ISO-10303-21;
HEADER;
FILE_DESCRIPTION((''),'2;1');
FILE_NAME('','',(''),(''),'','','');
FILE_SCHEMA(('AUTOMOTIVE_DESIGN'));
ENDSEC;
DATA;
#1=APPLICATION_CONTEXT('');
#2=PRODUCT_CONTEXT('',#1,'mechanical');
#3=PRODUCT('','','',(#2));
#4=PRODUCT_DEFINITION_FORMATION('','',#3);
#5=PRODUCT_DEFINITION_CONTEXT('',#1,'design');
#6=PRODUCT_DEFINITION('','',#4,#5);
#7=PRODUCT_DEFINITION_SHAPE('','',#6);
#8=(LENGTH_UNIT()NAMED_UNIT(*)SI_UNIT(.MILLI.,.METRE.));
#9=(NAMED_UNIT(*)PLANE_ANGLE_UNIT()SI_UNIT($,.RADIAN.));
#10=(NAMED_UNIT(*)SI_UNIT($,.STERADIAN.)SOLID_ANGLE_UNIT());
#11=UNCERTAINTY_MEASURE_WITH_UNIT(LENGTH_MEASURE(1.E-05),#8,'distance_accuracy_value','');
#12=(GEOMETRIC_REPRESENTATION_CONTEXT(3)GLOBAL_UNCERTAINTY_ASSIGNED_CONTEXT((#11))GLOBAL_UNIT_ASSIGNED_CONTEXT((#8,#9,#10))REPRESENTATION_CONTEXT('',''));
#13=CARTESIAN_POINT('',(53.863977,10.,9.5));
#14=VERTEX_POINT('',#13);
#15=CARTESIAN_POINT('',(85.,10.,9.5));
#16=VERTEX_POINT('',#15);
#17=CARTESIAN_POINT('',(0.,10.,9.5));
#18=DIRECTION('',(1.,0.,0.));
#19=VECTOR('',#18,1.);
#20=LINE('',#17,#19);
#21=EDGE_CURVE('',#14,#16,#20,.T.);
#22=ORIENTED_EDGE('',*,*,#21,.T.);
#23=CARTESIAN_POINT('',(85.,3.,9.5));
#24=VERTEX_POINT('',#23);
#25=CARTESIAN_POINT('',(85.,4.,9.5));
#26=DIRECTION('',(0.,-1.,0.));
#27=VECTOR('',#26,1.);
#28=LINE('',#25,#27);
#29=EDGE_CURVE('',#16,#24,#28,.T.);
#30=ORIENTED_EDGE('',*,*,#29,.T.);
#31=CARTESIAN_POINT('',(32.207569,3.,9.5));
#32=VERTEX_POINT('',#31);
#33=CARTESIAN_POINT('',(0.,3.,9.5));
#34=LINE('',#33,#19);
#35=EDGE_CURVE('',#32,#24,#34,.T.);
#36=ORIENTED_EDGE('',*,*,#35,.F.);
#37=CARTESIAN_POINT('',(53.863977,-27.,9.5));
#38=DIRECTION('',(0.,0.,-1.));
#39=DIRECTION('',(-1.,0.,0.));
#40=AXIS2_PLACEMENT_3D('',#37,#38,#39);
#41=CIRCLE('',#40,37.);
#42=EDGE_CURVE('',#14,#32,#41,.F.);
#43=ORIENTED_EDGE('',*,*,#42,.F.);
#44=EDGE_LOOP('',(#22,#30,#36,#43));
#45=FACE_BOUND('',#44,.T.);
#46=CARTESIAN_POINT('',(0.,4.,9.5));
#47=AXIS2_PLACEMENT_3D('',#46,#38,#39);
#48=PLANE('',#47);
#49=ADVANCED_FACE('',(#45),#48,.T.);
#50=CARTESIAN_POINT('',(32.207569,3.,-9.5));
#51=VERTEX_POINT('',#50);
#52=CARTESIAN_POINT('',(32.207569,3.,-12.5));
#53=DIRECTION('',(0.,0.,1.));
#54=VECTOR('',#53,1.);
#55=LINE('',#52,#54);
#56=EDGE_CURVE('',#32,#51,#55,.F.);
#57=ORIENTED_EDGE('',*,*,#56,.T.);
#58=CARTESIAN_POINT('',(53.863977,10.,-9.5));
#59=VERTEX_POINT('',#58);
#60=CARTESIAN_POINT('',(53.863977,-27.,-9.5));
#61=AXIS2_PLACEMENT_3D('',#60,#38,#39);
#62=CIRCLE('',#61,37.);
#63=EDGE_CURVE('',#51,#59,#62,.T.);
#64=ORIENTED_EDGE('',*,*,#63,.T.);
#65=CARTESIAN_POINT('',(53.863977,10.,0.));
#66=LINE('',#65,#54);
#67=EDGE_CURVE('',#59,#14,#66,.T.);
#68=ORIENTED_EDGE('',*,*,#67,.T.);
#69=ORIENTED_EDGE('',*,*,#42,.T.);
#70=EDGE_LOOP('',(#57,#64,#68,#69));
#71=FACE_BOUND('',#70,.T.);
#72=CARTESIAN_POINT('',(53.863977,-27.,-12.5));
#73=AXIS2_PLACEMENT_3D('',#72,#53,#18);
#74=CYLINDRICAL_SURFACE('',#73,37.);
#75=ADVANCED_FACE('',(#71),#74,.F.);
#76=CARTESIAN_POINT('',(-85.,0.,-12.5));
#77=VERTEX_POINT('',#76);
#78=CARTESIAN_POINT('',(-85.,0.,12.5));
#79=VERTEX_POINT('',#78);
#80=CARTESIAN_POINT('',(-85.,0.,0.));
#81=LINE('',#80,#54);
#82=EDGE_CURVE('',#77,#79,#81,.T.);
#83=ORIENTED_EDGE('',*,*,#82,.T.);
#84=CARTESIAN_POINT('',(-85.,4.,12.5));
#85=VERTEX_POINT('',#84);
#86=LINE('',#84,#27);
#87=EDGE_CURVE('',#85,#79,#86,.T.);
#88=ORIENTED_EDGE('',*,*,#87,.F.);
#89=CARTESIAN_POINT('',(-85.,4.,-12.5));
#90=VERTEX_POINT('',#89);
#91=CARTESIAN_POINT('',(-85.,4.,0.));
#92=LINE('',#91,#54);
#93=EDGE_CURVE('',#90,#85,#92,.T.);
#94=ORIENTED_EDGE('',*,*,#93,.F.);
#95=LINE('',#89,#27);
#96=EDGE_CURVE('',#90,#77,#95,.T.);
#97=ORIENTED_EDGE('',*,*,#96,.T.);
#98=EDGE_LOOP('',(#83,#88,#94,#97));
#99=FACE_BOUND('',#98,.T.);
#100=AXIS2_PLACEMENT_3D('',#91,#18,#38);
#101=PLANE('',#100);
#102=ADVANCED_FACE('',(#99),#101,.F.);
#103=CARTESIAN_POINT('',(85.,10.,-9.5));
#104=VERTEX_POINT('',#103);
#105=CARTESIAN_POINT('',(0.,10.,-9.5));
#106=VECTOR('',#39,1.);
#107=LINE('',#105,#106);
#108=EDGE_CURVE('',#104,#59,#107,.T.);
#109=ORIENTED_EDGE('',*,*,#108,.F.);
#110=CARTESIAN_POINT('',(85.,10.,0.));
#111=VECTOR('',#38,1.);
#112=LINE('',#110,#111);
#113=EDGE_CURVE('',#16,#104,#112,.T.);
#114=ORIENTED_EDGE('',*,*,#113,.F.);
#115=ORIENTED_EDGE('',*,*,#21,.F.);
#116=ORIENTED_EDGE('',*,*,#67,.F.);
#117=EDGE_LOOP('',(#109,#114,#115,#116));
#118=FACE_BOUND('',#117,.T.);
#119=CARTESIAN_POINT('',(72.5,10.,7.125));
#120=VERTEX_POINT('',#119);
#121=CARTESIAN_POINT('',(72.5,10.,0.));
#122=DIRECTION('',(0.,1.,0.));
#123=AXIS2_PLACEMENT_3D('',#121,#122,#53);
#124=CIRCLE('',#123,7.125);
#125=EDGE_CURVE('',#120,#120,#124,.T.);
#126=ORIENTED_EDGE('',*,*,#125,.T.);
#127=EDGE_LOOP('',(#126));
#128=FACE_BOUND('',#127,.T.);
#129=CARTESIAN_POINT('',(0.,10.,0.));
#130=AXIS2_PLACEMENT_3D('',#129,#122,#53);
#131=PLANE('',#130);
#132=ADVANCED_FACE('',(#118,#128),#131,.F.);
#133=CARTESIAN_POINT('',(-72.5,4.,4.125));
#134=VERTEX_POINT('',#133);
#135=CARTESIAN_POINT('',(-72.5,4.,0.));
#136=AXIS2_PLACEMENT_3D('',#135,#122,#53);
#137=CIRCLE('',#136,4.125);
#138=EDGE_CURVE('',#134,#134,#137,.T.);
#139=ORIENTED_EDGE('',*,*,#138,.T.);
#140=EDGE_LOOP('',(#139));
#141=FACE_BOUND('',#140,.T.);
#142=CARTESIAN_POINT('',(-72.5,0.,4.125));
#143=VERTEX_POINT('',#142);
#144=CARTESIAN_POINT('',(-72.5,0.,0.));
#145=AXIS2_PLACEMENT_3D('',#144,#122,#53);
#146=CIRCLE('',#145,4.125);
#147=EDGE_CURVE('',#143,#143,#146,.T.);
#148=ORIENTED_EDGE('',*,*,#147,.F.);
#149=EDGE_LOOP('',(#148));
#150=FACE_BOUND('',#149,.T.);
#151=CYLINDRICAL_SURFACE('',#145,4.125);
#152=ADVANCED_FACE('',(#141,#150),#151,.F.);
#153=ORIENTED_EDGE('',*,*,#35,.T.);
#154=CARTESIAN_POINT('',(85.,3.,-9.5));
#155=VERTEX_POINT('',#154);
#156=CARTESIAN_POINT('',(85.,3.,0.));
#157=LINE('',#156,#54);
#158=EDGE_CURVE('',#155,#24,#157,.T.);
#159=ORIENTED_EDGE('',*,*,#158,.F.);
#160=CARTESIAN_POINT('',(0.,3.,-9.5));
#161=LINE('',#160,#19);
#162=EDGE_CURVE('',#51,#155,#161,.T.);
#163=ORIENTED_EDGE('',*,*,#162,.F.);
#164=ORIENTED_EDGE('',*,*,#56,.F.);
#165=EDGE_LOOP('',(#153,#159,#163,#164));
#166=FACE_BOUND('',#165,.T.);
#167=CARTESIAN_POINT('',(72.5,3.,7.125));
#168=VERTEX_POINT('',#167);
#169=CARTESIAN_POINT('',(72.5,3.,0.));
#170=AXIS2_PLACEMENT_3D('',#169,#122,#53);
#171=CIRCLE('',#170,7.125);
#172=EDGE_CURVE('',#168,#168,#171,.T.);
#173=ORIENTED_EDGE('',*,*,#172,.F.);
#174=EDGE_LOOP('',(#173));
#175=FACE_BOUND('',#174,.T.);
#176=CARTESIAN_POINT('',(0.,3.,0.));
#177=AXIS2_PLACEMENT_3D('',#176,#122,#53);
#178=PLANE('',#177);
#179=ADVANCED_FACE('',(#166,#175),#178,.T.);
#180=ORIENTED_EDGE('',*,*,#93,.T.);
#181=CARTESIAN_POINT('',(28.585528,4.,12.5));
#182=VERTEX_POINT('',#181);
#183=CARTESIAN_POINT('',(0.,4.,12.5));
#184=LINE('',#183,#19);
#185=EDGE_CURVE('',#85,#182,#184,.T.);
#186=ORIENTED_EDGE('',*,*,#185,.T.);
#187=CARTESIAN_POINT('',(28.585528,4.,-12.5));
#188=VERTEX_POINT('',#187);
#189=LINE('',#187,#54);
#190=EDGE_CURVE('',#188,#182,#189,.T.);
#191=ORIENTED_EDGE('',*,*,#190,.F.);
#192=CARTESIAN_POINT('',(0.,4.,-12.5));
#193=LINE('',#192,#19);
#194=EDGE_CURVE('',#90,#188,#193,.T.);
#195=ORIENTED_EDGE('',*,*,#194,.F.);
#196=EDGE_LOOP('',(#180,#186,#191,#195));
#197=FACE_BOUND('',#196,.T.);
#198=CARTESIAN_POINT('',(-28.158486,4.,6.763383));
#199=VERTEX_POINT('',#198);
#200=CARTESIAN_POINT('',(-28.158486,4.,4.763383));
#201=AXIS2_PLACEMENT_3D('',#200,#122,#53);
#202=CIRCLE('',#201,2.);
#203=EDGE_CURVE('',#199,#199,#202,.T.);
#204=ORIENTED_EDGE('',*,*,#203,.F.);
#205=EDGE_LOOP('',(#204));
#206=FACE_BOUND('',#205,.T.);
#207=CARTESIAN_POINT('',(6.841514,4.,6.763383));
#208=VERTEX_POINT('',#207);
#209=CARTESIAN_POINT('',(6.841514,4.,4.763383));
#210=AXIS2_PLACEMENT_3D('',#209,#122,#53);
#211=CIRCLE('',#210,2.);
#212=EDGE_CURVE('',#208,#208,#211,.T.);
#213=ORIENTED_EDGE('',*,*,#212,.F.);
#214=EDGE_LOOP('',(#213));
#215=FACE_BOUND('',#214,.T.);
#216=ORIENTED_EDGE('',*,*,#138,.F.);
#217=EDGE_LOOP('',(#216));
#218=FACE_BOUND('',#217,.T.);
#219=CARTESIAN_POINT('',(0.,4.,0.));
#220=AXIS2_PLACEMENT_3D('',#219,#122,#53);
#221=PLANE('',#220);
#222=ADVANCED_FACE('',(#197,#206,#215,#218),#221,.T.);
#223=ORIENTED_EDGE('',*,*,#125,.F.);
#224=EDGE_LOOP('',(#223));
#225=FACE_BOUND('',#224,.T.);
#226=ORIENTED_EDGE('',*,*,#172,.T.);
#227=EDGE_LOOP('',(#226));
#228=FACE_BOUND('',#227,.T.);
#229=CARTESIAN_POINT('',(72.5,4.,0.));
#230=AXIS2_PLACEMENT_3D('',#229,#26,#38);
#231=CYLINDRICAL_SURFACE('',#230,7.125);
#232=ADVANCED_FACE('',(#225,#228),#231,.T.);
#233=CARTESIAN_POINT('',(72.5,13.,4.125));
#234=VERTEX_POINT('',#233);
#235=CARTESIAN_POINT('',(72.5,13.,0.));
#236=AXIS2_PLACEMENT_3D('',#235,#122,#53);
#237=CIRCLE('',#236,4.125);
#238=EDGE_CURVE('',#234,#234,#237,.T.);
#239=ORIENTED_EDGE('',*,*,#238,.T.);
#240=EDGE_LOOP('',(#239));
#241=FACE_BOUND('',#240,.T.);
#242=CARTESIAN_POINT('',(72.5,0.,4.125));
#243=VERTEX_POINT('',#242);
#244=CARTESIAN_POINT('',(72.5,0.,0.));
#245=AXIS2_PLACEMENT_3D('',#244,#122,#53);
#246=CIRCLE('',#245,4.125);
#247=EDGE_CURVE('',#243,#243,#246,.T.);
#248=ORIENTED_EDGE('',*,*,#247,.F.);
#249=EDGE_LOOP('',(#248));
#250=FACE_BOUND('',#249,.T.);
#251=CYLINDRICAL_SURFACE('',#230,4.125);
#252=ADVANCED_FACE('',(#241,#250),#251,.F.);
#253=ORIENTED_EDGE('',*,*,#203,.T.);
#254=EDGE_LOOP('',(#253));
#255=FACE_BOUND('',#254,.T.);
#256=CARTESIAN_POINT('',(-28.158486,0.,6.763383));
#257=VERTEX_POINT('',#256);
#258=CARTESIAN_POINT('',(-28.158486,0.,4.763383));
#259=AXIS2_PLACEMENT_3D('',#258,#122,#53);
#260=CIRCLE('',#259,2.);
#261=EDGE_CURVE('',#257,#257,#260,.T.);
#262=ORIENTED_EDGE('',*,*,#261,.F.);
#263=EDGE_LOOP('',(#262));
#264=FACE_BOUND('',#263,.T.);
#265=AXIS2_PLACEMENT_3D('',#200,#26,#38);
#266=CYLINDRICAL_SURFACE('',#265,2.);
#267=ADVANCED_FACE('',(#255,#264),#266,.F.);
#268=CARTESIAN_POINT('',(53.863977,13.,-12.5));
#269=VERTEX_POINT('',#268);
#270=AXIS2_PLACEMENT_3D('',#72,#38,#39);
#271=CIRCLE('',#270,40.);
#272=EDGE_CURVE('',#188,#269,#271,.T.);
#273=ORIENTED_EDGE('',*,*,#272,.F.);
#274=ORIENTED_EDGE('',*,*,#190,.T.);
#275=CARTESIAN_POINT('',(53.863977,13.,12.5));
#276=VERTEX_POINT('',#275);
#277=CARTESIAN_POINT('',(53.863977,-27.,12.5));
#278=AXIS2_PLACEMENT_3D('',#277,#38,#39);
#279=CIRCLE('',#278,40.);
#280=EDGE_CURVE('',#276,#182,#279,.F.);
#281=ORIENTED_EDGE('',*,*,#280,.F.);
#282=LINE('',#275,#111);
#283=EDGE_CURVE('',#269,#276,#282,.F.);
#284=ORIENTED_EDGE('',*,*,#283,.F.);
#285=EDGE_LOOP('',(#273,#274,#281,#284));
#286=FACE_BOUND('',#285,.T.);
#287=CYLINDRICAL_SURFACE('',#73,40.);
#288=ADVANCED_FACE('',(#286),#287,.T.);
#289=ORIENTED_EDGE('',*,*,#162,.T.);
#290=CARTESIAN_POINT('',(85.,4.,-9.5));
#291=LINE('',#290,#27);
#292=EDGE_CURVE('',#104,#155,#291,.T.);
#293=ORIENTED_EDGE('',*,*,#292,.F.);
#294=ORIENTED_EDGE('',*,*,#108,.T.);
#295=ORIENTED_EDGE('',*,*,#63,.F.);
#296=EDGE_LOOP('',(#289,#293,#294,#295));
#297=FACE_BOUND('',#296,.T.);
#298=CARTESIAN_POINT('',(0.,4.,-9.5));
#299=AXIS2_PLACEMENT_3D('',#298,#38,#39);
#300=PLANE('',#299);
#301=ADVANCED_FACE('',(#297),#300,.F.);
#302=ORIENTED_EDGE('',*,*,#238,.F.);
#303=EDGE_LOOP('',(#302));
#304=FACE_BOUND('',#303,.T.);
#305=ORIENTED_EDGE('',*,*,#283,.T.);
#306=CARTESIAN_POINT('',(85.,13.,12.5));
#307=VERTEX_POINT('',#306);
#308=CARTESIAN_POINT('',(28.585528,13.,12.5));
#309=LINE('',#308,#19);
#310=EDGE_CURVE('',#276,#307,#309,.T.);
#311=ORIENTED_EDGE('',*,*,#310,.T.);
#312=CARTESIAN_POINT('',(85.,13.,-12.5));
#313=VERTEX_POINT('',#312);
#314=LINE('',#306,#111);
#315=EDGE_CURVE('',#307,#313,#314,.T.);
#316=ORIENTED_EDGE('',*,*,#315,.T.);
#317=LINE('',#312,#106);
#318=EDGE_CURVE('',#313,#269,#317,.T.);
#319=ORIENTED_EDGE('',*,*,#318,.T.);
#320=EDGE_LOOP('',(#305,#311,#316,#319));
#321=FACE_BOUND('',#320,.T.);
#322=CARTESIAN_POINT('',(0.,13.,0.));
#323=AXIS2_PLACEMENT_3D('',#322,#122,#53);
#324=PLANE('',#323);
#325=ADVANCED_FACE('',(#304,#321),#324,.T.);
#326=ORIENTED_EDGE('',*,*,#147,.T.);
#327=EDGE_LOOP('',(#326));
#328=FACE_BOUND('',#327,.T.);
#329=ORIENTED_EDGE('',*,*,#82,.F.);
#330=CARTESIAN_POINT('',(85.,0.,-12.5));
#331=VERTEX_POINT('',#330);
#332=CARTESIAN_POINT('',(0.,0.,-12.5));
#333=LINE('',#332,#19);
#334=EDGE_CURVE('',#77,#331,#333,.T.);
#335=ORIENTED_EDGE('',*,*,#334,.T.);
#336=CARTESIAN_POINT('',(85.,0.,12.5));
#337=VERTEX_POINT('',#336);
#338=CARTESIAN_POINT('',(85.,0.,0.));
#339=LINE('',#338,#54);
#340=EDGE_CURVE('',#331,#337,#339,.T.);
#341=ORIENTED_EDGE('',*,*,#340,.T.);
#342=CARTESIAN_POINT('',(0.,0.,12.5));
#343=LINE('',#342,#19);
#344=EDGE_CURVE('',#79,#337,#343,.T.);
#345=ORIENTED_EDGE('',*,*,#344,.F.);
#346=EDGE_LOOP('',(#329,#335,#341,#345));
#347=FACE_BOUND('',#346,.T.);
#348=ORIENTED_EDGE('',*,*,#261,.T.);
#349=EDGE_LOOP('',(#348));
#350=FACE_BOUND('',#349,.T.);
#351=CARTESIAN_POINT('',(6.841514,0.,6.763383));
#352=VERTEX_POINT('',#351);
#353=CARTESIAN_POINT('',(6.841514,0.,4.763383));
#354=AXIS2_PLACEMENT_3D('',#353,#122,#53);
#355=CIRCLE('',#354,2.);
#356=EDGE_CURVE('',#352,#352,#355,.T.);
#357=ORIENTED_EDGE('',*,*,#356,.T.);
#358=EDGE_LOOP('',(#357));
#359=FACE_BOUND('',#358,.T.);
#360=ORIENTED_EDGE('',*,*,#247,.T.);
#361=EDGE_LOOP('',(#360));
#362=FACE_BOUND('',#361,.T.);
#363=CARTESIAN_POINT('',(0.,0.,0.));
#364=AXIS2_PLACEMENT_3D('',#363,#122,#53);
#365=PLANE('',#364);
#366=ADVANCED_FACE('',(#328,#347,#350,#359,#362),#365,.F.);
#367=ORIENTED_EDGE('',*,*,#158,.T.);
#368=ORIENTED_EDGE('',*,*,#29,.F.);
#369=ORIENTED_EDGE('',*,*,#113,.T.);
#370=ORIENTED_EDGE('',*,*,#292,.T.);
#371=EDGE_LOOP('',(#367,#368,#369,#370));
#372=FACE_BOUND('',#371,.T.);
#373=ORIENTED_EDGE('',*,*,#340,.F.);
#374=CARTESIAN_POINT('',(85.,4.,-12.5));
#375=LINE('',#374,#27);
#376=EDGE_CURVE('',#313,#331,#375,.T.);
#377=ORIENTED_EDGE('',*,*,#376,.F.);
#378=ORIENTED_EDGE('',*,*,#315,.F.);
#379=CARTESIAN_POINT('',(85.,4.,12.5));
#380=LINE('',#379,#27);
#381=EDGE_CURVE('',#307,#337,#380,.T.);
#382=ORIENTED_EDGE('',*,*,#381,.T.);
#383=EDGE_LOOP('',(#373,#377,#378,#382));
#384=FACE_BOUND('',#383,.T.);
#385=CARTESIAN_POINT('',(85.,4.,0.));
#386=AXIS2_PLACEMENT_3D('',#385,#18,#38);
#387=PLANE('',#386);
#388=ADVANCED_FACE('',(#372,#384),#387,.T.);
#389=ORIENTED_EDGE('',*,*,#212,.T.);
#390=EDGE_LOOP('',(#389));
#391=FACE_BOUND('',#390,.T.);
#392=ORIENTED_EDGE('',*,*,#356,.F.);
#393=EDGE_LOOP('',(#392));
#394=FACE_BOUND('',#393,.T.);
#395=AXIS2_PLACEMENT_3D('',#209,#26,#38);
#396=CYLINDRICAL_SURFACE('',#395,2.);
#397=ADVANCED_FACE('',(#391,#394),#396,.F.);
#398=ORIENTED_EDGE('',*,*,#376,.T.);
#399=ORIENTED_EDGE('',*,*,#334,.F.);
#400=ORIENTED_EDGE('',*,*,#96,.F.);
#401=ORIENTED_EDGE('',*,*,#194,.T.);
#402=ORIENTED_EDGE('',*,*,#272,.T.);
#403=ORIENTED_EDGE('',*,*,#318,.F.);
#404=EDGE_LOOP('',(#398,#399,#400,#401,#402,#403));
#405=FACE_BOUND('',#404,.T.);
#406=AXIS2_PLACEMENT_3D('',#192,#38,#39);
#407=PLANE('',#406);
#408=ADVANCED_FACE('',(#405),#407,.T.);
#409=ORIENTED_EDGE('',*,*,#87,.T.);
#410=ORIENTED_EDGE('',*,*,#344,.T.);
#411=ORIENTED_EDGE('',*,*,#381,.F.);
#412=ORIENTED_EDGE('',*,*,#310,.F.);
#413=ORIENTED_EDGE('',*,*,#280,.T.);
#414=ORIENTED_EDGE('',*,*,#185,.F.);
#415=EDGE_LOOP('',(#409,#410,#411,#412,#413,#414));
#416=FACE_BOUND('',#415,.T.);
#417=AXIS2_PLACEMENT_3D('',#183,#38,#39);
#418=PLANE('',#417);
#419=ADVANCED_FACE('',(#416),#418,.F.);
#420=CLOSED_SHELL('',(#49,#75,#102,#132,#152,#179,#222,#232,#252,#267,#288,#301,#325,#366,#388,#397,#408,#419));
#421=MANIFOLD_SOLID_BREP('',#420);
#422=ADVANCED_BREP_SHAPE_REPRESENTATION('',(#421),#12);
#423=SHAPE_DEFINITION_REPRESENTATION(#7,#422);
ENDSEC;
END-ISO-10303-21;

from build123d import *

# Parameters (mm, degrees)
SKETCH1_W           = 170
SKETCH1_H           = 25
SKETCH1_R           = 2
SKETCH1_R_2         = 4.125
BOSS_EXTRUDE1_DEPTH = 4
SKETCH2_R           = 4.125
CUT_EXTRUDE1_DEPTH  = 87.007267135
SKETCH3_W           = 56.414472257
SKETCH3_H           = 25
SKETCH3_R           = 4.125
BOSS_EXTRUDE2_DEPTH = 9
FILLET1_R           = 40
SHELL2_T            = -3


with BuildPart() as part:
    # Sketch1 → Boss-Extrude1 (new body)
    with BuildSketch(Plane(origin=(0, 0, 0), x_dir=(1, 0, 0), z_dir=(0, 1, 0))):
        Rectangle(SKETCH1_W, SKETCH1_H)
        with Locations(Location((-28.158485727, -4.763382536, 0), (0, 0, 270))):
            Circle(SKETCH1_R, mode=Mode.SUBTRACT)
        with Locations(Location((6.841514273, -4.763382536, 0), (0, 0, 270))):
            Circle(SKETCH1_R, mode=Mode.SUBTRACT)
        with Locations(Location((72.5, 0, 0), (0, 0, 270))):
            Circle(SKETCH1_R_2, mode=Mode.SUBTRACT)
    extrude(amount=BOSS_EXTRUDE1_DEPTH)

    # Sketch2 → Cut-Extrude1 (cut, through all)
    with BuildSketch(Plane(origin=(0, 4, 0), x_dir=(1, 0, 0), z_dir=(0, 1, 0))):
        with Locations(Location((-72.5, 0, 0), (0, 0, 270))):
            Circle(SKETCH2_R)
    extrude(amount=-CUT_EXTRUDE1_DEPTH, mode=Mode.SUBTRACT)

    # Sketch3 → Boss-Extrude2 (add)
    with BuildSketch(Plane(origin=(0, 4, 0), x_dir=(1, 0, 0), z_dir=(0, 1, 0))):
        with Locations((56.792763872, 0)):
            Rectangle(SKETCH3_W, SKETCH3_H)
        with Locations(Location((72.5, 0, 0), (0, 0, 270))):
            Circle(SKETCH3_R, mode=Mode.SUBTRACT)
    extrude(amount=BOSS_EXTRUDE2_DEPTH)

    # Fillet1
    # the kernel refuses this fillet: 40 mm, written as the material it takes off along each edge
    with BuildSketch(Plane(origin=(28.585527743, 13, -75.696123299), x_dir=(1, 0, 0), z_dir=(0, 0, 1))) as fillet1_piece_1:
        with BuildLine():
            CenterArc((25.27844932, -40), FILLET1_R, 90, 39.194967426)
            Line((0, -9), (0, 0))
            Line((0, 0), (25.27844932, 0))
        make_face()
    extrude(amount=151.392246598, mode=Mode.SUBTRACT)

    # Shell2
    shell2_openings = [part.faces().sort_by_distance(p)[0] for p in [
        (85, 6.5, 0),
    ]]
    offset(amount=SHELL2_T, openings=shell2_openings)


solid = part.part
